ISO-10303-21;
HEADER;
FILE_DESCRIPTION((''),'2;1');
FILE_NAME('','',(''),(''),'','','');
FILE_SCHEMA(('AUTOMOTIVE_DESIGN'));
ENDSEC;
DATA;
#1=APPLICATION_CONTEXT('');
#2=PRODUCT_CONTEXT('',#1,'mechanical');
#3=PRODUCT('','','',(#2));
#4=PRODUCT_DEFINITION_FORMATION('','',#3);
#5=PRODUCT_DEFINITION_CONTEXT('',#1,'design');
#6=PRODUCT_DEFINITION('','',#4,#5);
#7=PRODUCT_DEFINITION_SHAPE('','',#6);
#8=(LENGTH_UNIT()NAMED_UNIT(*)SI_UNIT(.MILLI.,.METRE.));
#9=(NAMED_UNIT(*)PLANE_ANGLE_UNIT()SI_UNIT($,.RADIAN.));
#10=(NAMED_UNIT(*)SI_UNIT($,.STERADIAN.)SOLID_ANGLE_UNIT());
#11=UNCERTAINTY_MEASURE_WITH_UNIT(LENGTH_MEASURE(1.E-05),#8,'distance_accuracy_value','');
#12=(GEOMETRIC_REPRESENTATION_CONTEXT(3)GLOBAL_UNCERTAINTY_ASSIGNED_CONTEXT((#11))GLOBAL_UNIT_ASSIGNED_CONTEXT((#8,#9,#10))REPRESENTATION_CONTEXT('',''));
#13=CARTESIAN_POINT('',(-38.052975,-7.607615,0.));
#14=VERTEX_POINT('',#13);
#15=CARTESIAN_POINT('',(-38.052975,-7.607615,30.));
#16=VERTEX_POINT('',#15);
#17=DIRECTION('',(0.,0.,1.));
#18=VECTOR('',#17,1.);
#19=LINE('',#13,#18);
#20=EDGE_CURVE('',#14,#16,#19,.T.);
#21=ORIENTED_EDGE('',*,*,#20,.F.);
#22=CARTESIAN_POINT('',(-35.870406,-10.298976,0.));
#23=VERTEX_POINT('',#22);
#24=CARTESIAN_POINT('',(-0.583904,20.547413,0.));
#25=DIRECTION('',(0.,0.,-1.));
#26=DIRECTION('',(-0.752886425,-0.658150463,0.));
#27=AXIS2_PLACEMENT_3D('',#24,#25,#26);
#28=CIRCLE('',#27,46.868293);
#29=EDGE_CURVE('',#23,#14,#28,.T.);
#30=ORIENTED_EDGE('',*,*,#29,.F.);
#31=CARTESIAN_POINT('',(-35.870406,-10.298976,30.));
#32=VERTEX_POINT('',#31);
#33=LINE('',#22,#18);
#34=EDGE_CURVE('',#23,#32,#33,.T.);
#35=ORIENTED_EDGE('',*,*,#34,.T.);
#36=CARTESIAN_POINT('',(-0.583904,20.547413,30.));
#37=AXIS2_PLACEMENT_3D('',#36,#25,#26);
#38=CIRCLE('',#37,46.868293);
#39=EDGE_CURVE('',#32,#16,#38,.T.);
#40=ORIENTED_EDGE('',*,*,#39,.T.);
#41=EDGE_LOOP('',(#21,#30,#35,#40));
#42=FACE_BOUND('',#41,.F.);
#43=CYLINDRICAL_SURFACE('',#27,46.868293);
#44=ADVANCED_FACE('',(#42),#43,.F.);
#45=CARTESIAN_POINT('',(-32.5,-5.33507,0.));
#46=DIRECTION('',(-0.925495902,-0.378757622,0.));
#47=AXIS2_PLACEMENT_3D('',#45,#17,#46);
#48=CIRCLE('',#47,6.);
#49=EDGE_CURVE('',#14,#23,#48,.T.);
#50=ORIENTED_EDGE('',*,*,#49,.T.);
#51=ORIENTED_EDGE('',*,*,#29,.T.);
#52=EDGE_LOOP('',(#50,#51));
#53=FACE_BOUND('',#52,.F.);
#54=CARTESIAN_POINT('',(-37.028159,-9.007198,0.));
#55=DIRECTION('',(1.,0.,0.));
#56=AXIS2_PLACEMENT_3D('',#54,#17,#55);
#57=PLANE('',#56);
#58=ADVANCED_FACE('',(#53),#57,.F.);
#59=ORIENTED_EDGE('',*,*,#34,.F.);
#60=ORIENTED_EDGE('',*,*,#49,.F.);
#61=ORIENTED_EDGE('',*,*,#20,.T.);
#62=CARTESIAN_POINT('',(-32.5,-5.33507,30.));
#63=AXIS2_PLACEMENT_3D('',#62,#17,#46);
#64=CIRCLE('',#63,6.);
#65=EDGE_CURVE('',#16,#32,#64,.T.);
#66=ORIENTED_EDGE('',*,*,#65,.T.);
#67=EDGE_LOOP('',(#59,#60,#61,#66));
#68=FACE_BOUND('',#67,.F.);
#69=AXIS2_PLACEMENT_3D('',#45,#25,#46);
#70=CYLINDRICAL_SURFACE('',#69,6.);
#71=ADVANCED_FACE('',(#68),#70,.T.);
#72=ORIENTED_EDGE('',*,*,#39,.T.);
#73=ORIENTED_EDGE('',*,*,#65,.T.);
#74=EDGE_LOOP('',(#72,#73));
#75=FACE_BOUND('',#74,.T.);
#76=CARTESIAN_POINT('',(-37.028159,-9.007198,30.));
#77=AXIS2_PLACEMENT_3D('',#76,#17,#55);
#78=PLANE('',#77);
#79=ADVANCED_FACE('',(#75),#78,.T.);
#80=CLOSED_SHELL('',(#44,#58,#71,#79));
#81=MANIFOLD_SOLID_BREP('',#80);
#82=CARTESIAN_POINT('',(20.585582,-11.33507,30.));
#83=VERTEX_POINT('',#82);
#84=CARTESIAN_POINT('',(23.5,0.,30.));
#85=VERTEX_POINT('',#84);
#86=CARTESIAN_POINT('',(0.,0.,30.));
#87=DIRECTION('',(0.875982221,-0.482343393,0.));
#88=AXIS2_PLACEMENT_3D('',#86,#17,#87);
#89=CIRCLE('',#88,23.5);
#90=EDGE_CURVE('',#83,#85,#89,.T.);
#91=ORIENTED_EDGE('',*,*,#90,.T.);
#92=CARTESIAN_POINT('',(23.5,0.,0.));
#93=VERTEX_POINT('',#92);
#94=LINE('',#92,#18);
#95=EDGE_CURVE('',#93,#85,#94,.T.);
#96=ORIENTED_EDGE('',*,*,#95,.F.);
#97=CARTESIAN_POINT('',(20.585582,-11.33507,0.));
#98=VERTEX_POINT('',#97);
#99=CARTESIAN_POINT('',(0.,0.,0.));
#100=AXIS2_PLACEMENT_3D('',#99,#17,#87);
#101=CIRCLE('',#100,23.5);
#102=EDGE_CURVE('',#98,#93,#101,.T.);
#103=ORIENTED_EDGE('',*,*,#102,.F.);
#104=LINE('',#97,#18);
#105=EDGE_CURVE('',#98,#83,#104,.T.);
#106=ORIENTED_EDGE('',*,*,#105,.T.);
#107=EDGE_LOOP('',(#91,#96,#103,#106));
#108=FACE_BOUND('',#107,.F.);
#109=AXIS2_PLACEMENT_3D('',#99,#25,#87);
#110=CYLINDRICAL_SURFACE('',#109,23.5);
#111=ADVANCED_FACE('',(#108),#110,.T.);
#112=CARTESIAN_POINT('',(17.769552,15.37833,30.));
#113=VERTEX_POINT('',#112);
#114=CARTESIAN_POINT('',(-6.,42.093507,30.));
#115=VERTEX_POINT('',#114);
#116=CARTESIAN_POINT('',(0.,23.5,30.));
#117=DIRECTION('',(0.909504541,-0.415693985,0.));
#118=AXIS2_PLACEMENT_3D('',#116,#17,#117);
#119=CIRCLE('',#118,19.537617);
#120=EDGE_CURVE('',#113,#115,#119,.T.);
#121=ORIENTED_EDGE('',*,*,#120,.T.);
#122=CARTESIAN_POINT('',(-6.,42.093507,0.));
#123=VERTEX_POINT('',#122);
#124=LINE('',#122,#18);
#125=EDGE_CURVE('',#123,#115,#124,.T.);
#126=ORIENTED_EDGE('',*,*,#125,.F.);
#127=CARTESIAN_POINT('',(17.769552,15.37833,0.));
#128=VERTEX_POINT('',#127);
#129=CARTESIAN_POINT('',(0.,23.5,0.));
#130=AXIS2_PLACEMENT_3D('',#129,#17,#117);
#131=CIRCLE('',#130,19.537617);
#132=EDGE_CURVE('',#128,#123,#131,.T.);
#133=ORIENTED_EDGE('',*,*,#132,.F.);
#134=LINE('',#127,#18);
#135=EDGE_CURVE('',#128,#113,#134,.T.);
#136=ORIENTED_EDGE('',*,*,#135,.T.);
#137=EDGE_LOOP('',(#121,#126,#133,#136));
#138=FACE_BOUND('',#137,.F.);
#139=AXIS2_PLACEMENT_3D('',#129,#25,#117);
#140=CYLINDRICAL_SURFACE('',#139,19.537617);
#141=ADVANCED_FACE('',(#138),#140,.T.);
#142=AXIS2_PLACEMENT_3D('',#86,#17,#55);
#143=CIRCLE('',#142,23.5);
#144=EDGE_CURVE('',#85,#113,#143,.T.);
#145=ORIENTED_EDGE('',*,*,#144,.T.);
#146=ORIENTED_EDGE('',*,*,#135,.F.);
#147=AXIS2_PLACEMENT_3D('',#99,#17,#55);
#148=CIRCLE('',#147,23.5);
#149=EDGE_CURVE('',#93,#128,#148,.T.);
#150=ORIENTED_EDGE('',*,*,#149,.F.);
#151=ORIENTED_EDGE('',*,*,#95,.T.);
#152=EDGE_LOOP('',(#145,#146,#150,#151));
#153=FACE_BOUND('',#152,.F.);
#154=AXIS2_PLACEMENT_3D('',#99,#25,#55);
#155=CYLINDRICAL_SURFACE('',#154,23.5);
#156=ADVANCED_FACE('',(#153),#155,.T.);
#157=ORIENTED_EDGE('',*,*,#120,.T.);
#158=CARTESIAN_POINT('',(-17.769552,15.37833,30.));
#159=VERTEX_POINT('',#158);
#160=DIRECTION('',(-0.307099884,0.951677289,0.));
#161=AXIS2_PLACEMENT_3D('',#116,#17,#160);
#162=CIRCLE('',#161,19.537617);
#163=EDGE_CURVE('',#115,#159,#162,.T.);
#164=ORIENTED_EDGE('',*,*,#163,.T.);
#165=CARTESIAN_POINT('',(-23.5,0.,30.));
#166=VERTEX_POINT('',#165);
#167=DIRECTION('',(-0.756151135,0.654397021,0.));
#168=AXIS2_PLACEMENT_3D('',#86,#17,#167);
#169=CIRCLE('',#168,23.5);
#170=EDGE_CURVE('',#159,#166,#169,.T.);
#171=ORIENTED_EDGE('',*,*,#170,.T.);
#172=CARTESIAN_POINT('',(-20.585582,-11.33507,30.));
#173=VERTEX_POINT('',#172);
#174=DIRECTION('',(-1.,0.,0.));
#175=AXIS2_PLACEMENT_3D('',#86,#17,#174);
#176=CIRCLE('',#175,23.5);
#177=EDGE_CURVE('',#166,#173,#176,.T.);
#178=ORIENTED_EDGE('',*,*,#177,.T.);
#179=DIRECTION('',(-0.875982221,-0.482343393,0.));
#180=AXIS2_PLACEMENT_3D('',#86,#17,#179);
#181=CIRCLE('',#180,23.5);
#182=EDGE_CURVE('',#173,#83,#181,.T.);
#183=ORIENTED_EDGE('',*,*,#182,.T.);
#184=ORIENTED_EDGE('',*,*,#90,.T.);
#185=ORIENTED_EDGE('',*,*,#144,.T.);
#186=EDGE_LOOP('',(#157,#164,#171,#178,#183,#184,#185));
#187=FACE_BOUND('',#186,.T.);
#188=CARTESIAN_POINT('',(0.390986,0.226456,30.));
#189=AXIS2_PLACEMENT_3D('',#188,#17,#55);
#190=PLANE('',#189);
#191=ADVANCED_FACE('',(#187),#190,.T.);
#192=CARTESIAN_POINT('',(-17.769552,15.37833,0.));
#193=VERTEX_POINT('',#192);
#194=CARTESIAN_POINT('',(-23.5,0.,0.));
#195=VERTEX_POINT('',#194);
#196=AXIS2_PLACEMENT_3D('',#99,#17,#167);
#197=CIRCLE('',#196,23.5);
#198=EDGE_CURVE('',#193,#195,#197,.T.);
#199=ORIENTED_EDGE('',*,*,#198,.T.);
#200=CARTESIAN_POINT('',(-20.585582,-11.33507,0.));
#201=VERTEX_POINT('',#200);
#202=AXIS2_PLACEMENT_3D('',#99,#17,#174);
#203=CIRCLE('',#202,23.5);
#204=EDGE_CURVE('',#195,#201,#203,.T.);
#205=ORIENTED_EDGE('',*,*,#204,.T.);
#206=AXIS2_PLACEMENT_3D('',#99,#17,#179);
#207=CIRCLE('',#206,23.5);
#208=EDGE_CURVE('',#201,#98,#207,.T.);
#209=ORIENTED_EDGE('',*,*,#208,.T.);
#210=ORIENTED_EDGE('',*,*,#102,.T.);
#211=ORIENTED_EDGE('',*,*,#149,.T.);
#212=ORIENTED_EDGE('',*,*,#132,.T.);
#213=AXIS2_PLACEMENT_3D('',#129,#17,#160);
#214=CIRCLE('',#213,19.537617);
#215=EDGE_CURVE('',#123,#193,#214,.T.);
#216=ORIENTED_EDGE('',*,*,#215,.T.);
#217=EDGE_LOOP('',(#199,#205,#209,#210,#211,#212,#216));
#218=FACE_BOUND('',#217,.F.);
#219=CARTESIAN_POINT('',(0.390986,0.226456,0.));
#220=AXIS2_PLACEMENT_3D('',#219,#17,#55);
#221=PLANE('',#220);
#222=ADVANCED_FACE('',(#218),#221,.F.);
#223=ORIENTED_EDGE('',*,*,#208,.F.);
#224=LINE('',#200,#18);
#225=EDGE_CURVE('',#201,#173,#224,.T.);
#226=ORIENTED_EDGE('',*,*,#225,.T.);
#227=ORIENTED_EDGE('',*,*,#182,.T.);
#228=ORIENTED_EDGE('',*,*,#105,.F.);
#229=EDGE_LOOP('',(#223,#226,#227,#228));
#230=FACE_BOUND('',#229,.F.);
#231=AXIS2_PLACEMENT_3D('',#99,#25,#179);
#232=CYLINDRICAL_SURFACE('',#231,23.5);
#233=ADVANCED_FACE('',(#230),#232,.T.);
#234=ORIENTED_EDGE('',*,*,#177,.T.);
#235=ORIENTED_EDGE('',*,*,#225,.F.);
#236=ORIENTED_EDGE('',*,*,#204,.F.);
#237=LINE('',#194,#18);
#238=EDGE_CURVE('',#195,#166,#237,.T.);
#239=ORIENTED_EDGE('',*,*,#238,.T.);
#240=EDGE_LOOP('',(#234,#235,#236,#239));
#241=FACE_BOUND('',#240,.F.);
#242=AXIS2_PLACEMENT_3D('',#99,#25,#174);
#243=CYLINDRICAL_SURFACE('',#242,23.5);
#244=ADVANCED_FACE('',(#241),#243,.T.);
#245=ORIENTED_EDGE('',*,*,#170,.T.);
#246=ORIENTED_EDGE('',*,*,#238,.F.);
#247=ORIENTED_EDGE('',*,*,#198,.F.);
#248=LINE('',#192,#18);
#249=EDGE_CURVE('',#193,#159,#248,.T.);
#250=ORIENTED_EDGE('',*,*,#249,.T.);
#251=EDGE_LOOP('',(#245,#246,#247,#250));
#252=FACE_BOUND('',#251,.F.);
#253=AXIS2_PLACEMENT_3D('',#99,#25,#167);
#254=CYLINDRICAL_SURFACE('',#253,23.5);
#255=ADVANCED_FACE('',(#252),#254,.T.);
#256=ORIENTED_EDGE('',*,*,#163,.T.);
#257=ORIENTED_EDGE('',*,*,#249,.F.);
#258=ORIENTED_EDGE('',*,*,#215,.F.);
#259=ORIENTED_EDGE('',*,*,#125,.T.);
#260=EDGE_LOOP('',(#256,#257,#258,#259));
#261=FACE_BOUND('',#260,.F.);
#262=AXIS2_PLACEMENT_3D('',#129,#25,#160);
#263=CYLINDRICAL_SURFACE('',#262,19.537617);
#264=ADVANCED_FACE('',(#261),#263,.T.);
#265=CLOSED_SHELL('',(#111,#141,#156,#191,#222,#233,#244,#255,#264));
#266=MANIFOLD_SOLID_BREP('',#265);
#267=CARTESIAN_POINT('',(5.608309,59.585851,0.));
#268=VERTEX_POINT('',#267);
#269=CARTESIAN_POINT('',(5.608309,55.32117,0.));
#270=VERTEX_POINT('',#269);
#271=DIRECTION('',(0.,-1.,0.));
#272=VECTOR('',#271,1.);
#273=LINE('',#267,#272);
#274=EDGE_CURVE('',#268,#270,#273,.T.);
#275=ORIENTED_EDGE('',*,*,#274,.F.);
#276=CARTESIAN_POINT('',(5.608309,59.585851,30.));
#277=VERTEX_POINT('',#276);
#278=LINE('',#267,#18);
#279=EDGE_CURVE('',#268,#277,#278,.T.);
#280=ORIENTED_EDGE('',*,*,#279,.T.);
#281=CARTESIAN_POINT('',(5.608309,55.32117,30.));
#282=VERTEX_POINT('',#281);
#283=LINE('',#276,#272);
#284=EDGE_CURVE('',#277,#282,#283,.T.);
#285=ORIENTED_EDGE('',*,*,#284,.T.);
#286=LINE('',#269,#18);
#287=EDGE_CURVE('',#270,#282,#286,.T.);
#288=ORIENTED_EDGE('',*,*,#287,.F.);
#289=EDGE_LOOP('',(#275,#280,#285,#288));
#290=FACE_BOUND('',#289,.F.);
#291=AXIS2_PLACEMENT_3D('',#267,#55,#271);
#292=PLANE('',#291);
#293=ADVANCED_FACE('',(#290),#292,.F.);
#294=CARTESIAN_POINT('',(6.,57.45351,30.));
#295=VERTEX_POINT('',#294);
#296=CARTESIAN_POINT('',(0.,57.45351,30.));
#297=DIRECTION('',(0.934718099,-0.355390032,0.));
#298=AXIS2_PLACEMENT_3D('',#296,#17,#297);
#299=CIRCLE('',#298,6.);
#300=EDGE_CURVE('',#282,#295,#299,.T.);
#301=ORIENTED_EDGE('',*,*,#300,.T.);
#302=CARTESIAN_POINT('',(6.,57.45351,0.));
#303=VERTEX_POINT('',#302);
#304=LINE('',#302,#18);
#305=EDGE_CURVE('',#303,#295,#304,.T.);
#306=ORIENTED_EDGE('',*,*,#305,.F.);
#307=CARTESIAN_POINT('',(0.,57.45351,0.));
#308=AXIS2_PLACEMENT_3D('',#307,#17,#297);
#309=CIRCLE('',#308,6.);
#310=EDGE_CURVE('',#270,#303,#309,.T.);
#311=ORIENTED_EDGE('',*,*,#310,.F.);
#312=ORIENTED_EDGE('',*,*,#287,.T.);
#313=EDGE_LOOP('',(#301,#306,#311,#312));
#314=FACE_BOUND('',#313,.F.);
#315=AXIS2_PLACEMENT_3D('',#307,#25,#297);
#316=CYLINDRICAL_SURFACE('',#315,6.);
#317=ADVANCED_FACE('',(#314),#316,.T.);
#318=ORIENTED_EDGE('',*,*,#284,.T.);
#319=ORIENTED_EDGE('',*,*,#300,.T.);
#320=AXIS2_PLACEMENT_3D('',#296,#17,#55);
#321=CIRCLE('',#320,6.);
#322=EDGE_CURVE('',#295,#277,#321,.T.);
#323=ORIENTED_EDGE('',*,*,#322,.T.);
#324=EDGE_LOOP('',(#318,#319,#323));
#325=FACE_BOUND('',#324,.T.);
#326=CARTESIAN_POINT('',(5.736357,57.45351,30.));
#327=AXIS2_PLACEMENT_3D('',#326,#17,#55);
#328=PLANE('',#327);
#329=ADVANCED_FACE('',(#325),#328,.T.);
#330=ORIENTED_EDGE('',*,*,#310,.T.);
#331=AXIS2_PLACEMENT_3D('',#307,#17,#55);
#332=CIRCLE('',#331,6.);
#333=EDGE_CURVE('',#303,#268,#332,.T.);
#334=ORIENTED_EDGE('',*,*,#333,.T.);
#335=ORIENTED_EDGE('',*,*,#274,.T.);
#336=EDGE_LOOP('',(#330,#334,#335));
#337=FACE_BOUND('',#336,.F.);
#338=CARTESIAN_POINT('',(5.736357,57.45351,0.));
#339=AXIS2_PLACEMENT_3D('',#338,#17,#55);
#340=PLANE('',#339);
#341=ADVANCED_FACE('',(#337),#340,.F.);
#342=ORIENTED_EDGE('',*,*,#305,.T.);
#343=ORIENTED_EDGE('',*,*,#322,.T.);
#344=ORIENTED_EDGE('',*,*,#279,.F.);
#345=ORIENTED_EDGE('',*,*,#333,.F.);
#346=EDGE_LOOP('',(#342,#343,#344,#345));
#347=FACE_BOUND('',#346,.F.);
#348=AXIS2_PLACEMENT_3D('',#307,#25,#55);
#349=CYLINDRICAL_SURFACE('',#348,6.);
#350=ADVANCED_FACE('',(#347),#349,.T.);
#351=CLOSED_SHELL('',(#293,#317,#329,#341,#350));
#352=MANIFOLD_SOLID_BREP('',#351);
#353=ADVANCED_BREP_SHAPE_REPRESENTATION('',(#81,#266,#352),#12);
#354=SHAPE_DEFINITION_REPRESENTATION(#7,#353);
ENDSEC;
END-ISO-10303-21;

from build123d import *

# Parameters (mm, degrees)
F1_DEPTH = 30


with BuildPart() as f1:
    # F0 (on Top) → F1 (new body)
    with BuildSketch(Plane.XY):
        with BuildLine():
            ThreePointArc((-7.1621949879, 10.849099638), (-6.1600107613, -11.4478935801), (13, 0))
            ThreePointArc((13, 0), (11.4478935801, 6.1600107613), (7.1621949879, 10.849099638))
            ThreePointArc((7.1621949879, 10.849099638), (0, 8.9623826913), (-7.1621949879, 10.849099638))
        make_face()
        with BuildLine():
            ThreePointArc((7.1621949879, 10.849099638), (11.4478935801, 6.1600107613), (13, 0))
            ThreePointArc((13, 0), (-6.1600107613, -11.4478935801), (-7.1621949879, 10.849099638))
            ThreePointArc((-7.1621949879, 10.849099638), (-10.0406665828, 12.9868020286), (-12.3083921231, 15.763993255))
            ThreePointArc((-12.3083921231, 15.763993255), (-8.7701812278, -17.9745353551), (20, 0))
            ThreePointArc((20, 0), (17.9745353551, 8.7701812278), (12.3083921231, 15.763993255))
            ThreePointArc((12.3083921231, 15.763993255), (10.0406665828, 12.9868020286), (7.1621949879, 10.849099638))
        make_face()
        with BuildLine():
            ThreePointArc((-7.1621949879, 10.849099638), (0, 8.9623826913), (7.1621949879, 10.849099638))
            ThreePointArc((7.1621949879, 10.849099638), (0, 13), (-7.1621949879, 10.849099638))
        make_face()
        with BuildLine():
            ThreePointArc((-7.1621949879, 10.849099638), (0, 13), (7.1621949879, 10.849099638))
            ThreePointArc((7.1621949879, 10.849099638), (10.0406665828, 12.9868020286), (12.3083921231, 15.763993255))
            ThreePointArc((12.3083921231, 15.763993255), (0, 20), (-12.3083921231, 15.763993255))
            ThreePointArc((-12.3083921231, 15.763993255), (-10.0406665828, 12.9868020286), (-7.1621949879, 10.849099638))
        make_face()
        with BuildLine():
            ThreePointArc((13.8247061586, 19.0033549572), (13.1665512762, 17.336864069), (12.3083921231, 15.763993255))
            ThreePointArc((12.3083921231, 15.763993255), (17.9745353551, 8.7701812278), (20, 0))
            ThreePointArc((20, 0), (-8.7701812278, -17.9745353551), (-12.3083921231, 15.763993255))
            ThreePointArc((-12.3083921231, 15.763993255), (-13.1665512762, 17.336864069), (-13.8247061586, 19.0033549572))
            ThreePointArc((-13.8247061586, 19.0033549572), (-15.9007698993, 17.3036272674), (-17.7695516679, 15.3783299979))
            ThreePointArc((-17.7695516679, 15.3783299979), (-22.0208363169, 8.2056546297), (-23.5, 0))
            ThreePointArc((-23.5, 0), (-22.7597361756, -5.851872283), (-20.5855821944, -11.3350697272))
            ThreePointArc((-20.5855821944, -11.3350697272), (0, -23.5), (20.5855821944, -11.3350697272))
            ThreePointArc((20.5855821944, -11.3350697272), (22.7597361756, -5.851872283), (23.5, 0))
            ThreePointArc((23.5, 0), (22.0208363169, 8.2056546297), (17.7695516679, 15.3783299979))
            ThreePointArc((17.7695516679, 15.3783299979), (15.9007698993, 17.3036272674), (13.8247061586, 19.0033549572))
        make_face()
        with BuildLine():
            ThreePointArc((-12.3083921231, 15.763993255), (0, 20), (12.3083921231, 15.763993255))
            ThreePointArc((12.3083921231, 15.763993255), (13.1665512762, 17.336864069), (13.8247061586, 19.0033549572))
            ThreePointArc((13.8247061586, 19.0033549572), (3.6269971249, 23.2184170833), (-7.3703918295, 22.3142852066))
            ThreePointArc((-7.3703918295, 22.3142852066), (-10.7260714831, 20.9093613135), (-13.8247061586, 19.0033549572))
            ThreePointArc((-13.8247061586, 19.0033549572), (-13.1665512762, 17.336864069), (-12.3083921231, 15.763993255))
        make_face()
        with BuildLine():
            ThreePointArc((14.5376173087, 23.5), (14.3582834028, 21.2235960953), (13.8247061586, 19.0033549572))
            ThreePointArc((13.8247061586, 19.0033549572), (15.9007698993, 17.3036272674), (17.7695516679, 15.3783299979))
            ThreePointArc((17.7695516679, 15.3783299979), (17.7957261948, 31.5641564532), (5.6083085947, 42.2153777629))
            ThreePointArc((5.6083085947, 42.2153777629), (-0.2051065098, 43.0365406718), (-6, 42.093506665))
            ThreePointArc((-6, 42.093506665), (-17.8794033097, 31.3768919879), (-17.7695516679, 15.3783299979))
            ThreePointArc((-17.7695516679, 15.3783299979), (-15.9007698993, 17.3036272674), (-13.8247061586, 19.0033549572))
            ThreePointArc((-13.8247061586, 19.0033549572), (-2.2764039047, 37.8582834028), (14.5376173087, 23.5))
        make_face()
        with BuildLine():
            ThreePointArc((-7.3703918295, 22.3142852066), (3.6269971249, 23.2184170833), (13.8247061586, 19.0033549572))
            ThreePointArc((13.8247061586, 19.0033549572), (14.3582834028, 21.2235960953), (14.5376173087, 23.5))
            ThreePointArc((14.5376173087, 23.5), (-2.2764039047, 37.8582834028), (-13.8247061586, 19.0033549572))
            ThreePointArc((-13.8247061586, 19.0033549572), (-10.7260714831, 20.9093613135), (-7.3703918295, 22.3142852066))
        make_face()
    extrude(amount=F1_DEPTH)


with BuildPart() as f1b:
    # F0 (on Top) → F1, piece 2 (new body)
    with BuildSketch(Plane.XY):
        with BuildLine():
            Line((5.6083085947, 59.5858506858), (5.6083085947, 55.321170296))
            ThreePointArc((5.6083085947, 55.321170296), (5.9012647614, 56.3695020887), (6, 57.4535104909))
            ThreePointArc((6, 57.4535104909), (5.9012647614, 58.5375188931), (5.6083085947, 59.5858506858))
        make_face()
    extrude(amount=F1_DEPTH)


with BuildPart() as f1c:
    # F0 (on Top) → F1, piece 3 (new body)
    with BuildSketch(Plane.XY):
        with BuildLine():
            ThreePointArc((-38.0529754103, -7.6076154565), (-37.1602081866, -9.1142838858), (-35.8704063618, -10.2989755437))
            ThreePointArc((-35.8704063618, -10.2989755437), (-36.9865719452, -8.9734728929), (-38.0529754103, -7.6076154565))
        make_face()
    extrude(amount=F1_DEPTH)


solid = Compound([f1.part, f1b.part, f1c.part])
